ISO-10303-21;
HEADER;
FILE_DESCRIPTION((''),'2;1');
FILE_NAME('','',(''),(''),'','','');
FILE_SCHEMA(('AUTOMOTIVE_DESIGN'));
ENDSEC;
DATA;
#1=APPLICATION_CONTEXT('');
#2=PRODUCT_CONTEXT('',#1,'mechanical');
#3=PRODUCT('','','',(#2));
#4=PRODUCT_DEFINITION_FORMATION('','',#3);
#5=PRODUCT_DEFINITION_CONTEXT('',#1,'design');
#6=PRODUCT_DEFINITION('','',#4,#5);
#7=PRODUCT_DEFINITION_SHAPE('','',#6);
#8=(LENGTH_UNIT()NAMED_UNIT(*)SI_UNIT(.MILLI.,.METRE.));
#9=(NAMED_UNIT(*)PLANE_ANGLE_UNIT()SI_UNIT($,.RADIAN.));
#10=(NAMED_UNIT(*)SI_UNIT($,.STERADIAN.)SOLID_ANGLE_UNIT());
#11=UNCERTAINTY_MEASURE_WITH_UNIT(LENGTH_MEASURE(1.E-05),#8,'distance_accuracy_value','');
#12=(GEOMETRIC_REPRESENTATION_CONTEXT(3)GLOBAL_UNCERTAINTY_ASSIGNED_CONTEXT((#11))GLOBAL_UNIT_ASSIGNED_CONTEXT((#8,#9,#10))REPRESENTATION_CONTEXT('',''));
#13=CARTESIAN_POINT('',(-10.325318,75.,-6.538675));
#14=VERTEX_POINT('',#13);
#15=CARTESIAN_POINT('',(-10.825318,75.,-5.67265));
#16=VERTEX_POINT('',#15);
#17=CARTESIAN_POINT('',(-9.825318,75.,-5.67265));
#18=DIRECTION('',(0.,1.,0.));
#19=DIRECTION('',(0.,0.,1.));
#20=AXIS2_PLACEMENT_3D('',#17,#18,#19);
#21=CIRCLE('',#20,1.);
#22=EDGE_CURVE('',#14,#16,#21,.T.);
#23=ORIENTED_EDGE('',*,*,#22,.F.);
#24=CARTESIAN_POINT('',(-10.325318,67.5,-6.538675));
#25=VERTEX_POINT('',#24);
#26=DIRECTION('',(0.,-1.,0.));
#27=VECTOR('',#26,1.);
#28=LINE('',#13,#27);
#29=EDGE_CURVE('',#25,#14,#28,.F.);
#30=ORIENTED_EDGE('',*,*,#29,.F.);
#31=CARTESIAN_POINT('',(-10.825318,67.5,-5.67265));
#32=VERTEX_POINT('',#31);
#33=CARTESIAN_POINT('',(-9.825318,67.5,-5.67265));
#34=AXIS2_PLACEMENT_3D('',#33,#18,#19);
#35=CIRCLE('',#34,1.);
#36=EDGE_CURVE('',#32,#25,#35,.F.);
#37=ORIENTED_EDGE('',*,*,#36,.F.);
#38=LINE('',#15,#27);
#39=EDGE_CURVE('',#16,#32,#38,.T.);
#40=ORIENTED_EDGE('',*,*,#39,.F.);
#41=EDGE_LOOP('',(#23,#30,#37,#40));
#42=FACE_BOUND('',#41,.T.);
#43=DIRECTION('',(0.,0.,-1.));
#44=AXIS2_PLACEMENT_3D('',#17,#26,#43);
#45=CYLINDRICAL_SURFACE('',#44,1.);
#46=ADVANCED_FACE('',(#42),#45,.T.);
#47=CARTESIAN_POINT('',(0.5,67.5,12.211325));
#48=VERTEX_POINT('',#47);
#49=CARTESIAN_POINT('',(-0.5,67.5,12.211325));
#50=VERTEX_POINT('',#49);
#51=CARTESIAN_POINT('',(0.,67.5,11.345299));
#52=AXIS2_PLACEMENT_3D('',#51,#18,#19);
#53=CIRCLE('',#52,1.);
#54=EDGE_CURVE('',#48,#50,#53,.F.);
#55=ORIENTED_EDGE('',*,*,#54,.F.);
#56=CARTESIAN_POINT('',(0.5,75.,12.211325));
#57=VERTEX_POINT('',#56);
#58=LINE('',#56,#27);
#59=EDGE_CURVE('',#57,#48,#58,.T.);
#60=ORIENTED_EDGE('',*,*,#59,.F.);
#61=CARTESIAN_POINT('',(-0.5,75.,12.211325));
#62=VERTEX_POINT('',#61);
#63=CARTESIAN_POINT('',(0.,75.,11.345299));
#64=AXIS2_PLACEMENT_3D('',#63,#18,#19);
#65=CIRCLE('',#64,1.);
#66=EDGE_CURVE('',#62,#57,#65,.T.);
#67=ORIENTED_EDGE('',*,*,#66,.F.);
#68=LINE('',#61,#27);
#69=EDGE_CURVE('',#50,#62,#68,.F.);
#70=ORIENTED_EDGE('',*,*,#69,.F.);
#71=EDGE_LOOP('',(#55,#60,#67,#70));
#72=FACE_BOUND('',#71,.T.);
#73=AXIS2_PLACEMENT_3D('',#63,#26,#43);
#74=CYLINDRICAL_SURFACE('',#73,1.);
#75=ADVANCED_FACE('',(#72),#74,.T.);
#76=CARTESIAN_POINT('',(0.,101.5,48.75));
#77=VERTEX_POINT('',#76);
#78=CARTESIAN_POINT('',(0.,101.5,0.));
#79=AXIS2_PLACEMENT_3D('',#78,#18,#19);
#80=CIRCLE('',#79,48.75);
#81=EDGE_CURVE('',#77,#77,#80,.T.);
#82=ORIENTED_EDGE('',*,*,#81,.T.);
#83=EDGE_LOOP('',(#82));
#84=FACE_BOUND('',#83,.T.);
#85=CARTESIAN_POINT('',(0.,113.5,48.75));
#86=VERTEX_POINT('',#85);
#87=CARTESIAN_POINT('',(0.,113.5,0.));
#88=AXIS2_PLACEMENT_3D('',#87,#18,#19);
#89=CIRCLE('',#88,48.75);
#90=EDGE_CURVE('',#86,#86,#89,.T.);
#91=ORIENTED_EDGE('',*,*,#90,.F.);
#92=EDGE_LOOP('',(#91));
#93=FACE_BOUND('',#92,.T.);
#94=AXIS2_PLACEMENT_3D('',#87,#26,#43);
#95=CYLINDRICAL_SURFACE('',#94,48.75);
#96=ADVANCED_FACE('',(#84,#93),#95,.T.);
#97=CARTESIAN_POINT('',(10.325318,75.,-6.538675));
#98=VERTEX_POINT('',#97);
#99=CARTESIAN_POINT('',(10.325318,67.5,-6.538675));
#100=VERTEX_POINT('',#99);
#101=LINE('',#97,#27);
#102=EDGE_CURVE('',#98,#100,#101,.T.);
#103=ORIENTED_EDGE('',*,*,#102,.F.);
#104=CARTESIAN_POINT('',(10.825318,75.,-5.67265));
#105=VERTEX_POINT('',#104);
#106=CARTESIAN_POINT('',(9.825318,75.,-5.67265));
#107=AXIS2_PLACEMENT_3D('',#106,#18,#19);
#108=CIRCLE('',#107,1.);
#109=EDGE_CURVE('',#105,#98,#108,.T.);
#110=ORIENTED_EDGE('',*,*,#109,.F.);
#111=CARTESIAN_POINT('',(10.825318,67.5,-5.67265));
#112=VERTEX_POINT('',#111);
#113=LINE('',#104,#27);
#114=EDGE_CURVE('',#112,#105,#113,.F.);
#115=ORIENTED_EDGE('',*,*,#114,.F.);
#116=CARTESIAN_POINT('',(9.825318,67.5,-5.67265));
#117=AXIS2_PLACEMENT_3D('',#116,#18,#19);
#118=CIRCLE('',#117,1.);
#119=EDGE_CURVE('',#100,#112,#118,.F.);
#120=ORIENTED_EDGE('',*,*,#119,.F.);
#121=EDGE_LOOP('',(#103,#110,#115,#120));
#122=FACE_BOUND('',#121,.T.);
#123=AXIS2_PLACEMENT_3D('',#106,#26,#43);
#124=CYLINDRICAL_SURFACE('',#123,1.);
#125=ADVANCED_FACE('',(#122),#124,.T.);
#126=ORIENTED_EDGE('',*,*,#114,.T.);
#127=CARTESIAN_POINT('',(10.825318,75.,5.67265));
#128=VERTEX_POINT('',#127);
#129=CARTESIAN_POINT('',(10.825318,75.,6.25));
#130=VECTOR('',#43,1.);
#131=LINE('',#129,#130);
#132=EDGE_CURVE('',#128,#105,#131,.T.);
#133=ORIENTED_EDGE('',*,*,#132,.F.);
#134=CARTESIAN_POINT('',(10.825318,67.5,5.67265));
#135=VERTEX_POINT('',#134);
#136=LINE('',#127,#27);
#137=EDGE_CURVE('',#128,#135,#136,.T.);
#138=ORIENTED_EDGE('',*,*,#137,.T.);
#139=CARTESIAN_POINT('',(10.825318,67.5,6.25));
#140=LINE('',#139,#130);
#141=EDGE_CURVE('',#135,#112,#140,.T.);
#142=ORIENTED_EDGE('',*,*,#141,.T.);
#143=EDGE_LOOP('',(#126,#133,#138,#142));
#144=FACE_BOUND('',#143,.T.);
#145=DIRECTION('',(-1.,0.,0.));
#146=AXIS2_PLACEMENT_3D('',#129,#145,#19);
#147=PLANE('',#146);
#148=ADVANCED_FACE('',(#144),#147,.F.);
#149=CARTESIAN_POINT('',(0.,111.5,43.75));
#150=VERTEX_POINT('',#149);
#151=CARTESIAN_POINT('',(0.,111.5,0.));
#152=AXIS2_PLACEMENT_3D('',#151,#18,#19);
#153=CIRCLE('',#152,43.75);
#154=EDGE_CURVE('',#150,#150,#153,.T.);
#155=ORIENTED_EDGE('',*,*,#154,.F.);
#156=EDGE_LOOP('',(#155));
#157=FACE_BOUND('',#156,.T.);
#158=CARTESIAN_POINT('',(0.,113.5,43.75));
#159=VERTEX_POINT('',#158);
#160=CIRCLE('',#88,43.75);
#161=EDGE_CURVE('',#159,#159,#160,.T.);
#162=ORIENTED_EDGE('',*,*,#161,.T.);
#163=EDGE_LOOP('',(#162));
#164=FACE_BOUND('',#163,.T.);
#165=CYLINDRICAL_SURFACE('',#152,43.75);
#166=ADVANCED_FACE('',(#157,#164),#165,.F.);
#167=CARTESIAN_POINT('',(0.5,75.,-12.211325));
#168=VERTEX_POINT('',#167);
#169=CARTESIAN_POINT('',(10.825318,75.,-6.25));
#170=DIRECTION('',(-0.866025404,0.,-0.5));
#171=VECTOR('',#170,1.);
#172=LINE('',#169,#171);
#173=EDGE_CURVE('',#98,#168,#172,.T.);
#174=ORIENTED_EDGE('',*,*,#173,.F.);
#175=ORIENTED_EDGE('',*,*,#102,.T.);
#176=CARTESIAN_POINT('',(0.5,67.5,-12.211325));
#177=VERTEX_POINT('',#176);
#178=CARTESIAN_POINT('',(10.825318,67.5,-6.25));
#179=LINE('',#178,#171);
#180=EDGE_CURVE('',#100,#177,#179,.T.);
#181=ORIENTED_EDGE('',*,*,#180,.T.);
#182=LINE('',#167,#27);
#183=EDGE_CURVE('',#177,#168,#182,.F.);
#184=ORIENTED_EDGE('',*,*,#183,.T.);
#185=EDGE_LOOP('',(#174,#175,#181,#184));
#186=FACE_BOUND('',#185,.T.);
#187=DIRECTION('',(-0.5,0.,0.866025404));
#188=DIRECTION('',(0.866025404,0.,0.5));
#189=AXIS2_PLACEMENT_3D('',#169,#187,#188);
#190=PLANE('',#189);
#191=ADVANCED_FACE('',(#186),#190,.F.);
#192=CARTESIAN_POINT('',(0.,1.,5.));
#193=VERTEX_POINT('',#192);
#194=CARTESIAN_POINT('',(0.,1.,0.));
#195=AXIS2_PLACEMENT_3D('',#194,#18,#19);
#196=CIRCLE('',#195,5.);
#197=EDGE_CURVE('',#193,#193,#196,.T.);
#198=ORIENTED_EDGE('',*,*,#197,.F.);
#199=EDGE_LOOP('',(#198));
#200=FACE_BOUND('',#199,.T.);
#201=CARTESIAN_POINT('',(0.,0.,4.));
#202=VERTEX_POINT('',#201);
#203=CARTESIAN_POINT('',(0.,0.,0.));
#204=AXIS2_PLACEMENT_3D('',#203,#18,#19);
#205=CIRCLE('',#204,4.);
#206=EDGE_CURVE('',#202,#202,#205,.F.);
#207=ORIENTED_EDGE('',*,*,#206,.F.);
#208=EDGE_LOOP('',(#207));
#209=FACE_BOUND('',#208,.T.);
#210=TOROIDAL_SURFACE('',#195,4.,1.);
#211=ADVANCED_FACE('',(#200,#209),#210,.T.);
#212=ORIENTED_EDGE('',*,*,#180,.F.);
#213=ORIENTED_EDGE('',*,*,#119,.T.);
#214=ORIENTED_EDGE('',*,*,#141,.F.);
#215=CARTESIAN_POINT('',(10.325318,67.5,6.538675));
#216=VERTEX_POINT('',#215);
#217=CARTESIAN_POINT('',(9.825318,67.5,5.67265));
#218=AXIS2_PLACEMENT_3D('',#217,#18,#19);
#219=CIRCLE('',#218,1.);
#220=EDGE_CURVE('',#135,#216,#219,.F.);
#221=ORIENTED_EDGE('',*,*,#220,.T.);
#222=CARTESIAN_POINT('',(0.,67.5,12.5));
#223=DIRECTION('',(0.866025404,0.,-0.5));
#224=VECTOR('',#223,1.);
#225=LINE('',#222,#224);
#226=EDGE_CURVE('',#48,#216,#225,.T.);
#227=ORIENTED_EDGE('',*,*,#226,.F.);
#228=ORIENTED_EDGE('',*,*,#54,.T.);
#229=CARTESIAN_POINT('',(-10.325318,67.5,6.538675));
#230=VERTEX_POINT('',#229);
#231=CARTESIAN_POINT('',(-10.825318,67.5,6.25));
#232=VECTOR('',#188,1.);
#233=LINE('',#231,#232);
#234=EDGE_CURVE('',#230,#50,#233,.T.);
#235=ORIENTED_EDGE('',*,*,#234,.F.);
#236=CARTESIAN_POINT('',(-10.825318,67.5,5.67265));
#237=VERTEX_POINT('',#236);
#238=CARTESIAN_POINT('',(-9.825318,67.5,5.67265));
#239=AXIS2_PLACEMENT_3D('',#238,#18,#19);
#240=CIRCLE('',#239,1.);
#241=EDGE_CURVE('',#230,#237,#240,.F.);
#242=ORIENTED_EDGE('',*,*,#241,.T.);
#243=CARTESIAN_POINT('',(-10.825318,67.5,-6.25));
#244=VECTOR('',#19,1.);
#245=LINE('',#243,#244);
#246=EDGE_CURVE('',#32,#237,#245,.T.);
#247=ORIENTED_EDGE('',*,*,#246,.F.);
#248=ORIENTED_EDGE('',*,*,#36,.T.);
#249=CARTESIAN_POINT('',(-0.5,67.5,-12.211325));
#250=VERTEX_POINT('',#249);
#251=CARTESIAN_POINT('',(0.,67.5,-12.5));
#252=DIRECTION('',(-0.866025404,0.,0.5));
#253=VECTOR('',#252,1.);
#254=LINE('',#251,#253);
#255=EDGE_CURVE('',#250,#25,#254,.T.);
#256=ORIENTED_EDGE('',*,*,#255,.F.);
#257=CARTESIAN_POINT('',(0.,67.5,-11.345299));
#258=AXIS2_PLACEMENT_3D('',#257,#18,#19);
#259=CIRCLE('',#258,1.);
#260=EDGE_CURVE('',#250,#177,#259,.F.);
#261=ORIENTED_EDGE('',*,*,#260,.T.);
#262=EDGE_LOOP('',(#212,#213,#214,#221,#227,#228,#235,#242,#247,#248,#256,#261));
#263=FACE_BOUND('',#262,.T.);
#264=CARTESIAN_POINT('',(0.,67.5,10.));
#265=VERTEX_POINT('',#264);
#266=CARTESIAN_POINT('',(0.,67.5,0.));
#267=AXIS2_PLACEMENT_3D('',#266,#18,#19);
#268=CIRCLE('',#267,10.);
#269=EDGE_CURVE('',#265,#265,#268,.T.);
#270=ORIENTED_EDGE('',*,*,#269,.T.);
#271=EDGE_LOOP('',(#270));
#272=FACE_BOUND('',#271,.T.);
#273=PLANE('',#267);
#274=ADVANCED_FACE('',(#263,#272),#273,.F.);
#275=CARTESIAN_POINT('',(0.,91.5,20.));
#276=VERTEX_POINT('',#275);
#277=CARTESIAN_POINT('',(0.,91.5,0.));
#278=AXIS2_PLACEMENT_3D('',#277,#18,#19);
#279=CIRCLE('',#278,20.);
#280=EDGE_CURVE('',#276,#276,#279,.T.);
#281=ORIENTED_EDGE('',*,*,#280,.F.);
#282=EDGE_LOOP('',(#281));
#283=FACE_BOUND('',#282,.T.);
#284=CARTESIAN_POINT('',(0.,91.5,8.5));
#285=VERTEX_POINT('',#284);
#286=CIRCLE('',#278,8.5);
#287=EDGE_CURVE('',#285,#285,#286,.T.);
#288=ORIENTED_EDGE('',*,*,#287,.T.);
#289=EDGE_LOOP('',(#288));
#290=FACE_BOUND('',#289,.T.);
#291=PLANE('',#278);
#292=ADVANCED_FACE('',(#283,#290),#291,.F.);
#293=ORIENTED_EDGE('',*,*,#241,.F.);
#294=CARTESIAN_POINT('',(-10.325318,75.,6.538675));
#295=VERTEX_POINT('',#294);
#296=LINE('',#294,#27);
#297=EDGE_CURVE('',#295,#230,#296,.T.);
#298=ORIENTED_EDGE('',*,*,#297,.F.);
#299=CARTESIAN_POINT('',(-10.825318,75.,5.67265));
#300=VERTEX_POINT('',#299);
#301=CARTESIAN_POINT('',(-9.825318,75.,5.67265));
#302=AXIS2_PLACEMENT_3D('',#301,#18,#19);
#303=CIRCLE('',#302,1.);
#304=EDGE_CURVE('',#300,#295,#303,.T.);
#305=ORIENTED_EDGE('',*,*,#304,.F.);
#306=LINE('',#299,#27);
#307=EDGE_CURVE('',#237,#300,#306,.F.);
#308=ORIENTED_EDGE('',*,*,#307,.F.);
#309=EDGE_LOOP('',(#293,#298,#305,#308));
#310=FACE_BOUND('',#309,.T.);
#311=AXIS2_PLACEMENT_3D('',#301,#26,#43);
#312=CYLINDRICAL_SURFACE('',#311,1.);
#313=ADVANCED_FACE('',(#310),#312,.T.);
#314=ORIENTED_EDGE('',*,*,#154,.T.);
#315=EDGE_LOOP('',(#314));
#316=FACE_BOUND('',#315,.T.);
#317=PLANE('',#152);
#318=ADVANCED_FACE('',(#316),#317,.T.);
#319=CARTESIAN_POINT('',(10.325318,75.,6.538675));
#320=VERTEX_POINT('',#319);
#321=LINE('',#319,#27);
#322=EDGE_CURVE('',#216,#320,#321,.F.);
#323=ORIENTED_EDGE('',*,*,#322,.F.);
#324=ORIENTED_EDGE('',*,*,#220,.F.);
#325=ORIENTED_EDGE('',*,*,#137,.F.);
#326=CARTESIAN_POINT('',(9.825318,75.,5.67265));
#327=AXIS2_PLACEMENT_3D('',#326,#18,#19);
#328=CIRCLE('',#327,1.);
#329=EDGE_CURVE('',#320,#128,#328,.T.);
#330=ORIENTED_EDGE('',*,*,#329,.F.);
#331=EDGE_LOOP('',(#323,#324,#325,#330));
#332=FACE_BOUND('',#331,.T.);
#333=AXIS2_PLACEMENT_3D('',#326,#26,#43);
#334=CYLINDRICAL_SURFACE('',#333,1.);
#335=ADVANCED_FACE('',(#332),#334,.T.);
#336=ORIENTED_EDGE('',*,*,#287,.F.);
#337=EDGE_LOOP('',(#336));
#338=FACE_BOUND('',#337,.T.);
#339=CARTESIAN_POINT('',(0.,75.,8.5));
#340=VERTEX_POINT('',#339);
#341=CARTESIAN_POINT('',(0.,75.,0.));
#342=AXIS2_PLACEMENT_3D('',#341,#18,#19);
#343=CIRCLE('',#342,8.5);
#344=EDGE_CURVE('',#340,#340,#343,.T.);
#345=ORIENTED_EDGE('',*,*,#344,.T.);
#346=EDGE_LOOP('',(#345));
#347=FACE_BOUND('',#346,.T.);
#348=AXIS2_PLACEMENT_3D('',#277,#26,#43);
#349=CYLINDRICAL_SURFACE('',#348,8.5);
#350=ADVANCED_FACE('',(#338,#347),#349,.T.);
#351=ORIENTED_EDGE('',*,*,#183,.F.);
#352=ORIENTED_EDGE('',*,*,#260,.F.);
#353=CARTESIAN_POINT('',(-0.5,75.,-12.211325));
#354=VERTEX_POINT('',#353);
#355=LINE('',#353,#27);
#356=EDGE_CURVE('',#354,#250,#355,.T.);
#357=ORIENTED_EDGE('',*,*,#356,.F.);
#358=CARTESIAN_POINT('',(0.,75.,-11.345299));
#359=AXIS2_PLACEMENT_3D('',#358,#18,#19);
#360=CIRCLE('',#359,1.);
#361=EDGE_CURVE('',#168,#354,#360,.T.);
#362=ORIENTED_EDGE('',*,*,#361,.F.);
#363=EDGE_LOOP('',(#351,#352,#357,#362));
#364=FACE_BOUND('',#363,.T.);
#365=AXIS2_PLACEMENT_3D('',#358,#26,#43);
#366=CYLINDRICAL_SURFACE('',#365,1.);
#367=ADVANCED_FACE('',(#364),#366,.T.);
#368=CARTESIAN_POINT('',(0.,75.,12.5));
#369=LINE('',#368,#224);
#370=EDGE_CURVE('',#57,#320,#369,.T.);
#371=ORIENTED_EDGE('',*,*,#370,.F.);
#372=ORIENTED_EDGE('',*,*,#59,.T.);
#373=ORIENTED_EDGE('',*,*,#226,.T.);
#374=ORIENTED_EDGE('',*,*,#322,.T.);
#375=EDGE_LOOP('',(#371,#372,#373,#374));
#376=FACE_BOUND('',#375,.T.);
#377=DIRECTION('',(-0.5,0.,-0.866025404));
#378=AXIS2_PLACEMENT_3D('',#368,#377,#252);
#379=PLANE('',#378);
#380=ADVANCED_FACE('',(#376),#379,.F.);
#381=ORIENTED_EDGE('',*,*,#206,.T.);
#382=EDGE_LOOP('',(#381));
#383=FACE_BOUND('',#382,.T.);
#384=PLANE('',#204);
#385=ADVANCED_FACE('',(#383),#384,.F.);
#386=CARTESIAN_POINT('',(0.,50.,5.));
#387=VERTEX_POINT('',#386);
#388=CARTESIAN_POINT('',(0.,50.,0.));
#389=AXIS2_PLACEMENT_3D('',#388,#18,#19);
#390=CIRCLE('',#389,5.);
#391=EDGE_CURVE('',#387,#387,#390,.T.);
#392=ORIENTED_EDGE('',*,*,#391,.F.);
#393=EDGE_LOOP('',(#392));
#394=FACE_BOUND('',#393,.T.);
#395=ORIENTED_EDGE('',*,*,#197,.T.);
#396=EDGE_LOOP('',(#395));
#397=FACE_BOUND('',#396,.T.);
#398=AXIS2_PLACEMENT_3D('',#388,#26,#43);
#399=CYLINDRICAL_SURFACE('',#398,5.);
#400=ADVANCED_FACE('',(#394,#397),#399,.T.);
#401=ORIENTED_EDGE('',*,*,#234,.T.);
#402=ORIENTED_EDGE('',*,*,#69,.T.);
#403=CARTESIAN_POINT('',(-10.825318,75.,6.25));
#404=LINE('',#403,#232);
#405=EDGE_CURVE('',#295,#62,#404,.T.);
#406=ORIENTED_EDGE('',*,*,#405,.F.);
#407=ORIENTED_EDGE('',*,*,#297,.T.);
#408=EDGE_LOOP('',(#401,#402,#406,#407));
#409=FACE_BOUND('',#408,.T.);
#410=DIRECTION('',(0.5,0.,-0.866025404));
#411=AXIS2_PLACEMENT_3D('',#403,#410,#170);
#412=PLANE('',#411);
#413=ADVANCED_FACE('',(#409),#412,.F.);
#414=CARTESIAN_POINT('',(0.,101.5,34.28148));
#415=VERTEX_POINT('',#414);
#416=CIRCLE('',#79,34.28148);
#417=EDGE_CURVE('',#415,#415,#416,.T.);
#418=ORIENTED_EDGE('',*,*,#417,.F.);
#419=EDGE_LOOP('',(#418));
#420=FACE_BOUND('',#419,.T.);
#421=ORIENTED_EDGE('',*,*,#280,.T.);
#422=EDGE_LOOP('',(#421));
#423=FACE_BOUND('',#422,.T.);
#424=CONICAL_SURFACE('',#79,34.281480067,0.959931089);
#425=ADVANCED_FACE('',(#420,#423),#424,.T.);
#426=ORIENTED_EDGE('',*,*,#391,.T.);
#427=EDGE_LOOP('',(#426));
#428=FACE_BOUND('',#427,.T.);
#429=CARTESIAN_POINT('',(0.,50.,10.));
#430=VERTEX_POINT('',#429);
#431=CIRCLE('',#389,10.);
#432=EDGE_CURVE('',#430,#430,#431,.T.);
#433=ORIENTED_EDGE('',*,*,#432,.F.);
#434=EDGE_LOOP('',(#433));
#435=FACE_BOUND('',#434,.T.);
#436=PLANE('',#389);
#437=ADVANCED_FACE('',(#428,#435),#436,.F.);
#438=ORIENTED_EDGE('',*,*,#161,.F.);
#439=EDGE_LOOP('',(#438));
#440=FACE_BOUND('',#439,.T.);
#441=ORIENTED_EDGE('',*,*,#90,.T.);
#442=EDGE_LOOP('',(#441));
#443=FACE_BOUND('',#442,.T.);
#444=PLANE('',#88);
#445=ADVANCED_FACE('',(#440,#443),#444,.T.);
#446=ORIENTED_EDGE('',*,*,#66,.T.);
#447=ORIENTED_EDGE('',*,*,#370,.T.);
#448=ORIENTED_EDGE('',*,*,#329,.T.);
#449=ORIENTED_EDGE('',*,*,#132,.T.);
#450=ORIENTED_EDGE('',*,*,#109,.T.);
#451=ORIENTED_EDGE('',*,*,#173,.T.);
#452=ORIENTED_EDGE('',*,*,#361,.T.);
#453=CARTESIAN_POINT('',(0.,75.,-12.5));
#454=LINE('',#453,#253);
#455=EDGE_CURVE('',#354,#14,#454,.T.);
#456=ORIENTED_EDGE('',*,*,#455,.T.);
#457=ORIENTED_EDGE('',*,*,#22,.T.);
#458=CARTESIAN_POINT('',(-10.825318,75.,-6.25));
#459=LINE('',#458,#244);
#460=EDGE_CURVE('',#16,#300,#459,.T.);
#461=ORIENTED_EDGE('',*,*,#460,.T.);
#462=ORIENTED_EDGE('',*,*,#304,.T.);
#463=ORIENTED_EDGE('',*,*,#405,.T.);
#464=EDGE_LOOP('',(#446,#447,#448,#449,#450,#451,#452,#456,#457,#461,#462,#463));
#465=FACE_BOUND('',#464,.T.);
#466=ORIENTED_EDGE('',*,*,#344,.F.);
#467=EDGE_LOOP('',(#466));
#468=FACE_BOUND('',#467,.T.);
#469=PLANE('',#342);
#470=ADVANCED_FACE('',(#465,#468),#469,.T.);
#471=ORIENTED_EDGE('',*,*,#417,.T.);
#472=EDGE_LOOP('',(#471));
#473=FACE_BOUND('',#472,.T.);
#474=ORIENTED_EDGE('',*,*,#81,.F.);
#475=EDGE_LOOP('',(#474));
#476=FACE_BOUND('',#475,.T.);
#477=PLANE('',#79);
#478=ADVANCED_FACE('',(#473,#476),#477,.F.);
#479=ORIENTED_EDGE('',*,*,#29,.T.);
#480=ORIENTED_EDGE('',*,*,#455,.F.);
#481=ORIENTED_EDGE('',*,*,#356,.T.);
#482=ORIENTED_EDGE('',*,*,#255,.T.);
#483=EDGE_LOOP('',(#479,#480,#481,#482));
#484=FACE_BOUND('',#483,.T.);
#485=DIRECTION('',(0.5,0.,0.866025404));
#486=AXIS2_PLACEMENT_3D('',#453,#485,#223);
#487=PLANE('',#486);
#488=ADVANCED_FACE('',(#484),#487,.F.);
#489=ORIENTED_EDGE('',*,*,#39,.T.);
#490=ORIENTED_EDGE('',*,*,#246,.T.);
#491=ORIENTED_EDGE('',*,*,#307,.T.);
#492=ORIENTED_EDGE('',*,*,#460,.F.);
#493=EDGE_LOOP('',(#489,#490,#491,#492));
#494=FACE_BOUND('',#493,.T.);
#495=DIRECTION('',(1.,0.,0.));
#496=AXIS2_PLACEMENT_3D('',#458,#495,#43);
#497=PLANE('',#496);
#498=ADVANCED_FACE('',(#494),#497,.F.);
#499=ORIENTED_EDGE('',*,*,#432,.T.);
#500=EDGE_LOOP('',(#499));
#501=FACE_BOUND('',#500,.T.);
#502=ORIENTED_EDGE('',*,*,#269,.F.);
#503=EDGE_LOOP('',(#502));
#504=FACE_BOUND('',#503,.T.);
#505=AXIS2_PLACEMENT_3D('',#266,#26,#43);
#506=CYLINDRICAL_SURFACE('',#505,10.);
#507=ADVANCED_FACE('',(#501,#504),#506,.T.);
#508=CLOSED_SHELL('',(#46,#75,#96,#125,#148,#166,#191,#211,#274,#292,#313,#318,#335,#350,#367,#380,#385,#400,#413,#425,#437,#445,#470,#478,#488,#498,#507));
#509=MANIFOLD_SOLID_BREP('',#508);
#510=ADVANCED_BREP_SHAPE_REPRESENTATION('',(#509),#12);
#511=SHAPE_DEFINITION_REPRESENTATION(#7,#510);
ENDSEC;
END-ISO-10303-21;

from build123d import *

# Parameters (mm, degrees)
SKETCH1_R           = 5
BOSS_EXTRUDE1_DEPTH = 50
SKETCH2_R           = 10
BOSS_EXTRUDE2_DEPTH = 17.5
BOSS_EXTRUDE3_DEPTH = 7.5
SKETCH4_R           = 8.5
BOSS_EXTRUDE4_DEPTH = 16.5
SKETCH5_R           = 20
BOSS_EXTRUDE5_DEPTH = 10
SKETCH6_R           = 48.75
BOSS_EXTRUDE6_DEPTH = 12
CHAMFER1_SIZE2      = 10
CHAMFER1_SIZE       = 14.281480067
SKETCH7_R           = 43.75
CUT_EXTRUDE2_DEPTH  = 2
FILLET1_R           = 1


with BuildPart() as part:
    # Sketch1 → Boss-Extrude1 (new body)
    with BuildSketch(Plane(origin=(0, 0, 0), x_dir=(1, 0, 0), z_dir=(0, 1, 0))):
        with Locations(Location((0, 0, 0), (0, 0, 270))):
            Circle(SKETCH1_R)
    extrude(amount=BOSS_EXTRUDE1_DEPTH)

    # Sketch2 → Boss-Extrude2 (add)
    with BuildSketch(Plane(origin=(0, 50, 0), x_dir=(1, 0, 0), z_dir=(0, 1, 0))):
        with Locations(Location((0, 0, 0), (0, 0, 270))):
            Circle(SKETCH2_R)
    extrude(amount=BOSS_EXTRUDE2_DEPTH)

    # Sketch3 → Boss-Extrude3 (add)
    with BuildSketch(Plane(origin=(0, 67.5, 0), x_dir=(1, 0, 0), z_dir=(0, 1, 0))):
        Polygon((10.825317547, -6.25), (10.825317547, 6.25), (0, 12.5), (-10.825317547, 6.25), (-10.825317547, -6.25), (0, -12.5), align=None)
    extrude(amount=BOSS_EXTRUDE3_DEPTH)

    # Sketch4 → Boss-Extrude4 (add)
    with BuildSketch(Plane(origin=(0, 75, 0), x_dir=(1, 0, 0), z_dir=(0, 1, 0))):
        with Locations(Location((0, 0, 0), (0, 0, 270))):
            Circle(SKETCH4_R)
    extrude(amount=BOSS_EXTRUDE4_DEPTH)

    # Sketch5 → Boss-Extrude5 (add)
    with BuildSketch(Plane(origin=(0, 91.5, 0), x_dir=(1, 0, 0), z_dir=(0, 1, 0))):
        with Locations(Location((0, 0, 0), (0, 0, 270))):
            Circle(SKETCH5_R)
    extrude(amount=BOSS_EXTRUDE5_DEPTH)

    # Sketch6 → Boss-Extrude6 (add)
    with BuildSketch(Plane(origin=(0, 101.5, 0), x_dir=(1, 0, 0), z_dir=(0, 1, 0))):
        with Locations(Location((0, 0, 0), (0, 0, 270))):
            Circle(SKETCH6_R)
    extrude(amount=BOSS_EXTRUDE6_DEPTH)

    # Chamfer1
    chamfer1_edges = [part.edges().sort_by_distance(p)[0] for p in [
        (0, 101.5, -20),
    ]]
    chamfer1_side = [part.faces().sort_by_distance(p)[0] for p in [
        (0, 101.5, -20.2),
    ]]
    chamfer(chamfer1_edges, length=CHAMFER1_SIZE - 0.0001, length2=CHAMFER1_SIZE2 - 0.0001, reference=chamfer1_side[0])  # a hair under: the kernel refuses the full size

    # Sketch7 → Cut-Extrude2 (cut)
    with BuildSketch(Plane(origin=(0, 113.5, 0), x_dir=(1, 0, 0), z_dir=(0, 1, 0))):
        with Locations(Location((0, 0, 0), (0, 0, 270))):
            Circle(SKETCH7_R)
    extrude(amount=-CUT_EXTRUDE2_DEPTH, mode=Mode.SUBTRACT)

    # Fillet1
    fillet1_edges = [part.edges().sort_by_distance(p)[0] for p in [
        (0, 71.25, 12.5),
        (10.825317547, 71.25, 6.25),
        (10.825317547, 71.25, -6.25),
        (0, 71.25, -12.5),
        (-10.825317547, 71.25, -6.25),
        (-10.825317547, 71.25, 6.25),
        (0, 0, -5),
    ]]
    fillet(fillet1_edges, radius=FILLET1_R)


solid = part.part
